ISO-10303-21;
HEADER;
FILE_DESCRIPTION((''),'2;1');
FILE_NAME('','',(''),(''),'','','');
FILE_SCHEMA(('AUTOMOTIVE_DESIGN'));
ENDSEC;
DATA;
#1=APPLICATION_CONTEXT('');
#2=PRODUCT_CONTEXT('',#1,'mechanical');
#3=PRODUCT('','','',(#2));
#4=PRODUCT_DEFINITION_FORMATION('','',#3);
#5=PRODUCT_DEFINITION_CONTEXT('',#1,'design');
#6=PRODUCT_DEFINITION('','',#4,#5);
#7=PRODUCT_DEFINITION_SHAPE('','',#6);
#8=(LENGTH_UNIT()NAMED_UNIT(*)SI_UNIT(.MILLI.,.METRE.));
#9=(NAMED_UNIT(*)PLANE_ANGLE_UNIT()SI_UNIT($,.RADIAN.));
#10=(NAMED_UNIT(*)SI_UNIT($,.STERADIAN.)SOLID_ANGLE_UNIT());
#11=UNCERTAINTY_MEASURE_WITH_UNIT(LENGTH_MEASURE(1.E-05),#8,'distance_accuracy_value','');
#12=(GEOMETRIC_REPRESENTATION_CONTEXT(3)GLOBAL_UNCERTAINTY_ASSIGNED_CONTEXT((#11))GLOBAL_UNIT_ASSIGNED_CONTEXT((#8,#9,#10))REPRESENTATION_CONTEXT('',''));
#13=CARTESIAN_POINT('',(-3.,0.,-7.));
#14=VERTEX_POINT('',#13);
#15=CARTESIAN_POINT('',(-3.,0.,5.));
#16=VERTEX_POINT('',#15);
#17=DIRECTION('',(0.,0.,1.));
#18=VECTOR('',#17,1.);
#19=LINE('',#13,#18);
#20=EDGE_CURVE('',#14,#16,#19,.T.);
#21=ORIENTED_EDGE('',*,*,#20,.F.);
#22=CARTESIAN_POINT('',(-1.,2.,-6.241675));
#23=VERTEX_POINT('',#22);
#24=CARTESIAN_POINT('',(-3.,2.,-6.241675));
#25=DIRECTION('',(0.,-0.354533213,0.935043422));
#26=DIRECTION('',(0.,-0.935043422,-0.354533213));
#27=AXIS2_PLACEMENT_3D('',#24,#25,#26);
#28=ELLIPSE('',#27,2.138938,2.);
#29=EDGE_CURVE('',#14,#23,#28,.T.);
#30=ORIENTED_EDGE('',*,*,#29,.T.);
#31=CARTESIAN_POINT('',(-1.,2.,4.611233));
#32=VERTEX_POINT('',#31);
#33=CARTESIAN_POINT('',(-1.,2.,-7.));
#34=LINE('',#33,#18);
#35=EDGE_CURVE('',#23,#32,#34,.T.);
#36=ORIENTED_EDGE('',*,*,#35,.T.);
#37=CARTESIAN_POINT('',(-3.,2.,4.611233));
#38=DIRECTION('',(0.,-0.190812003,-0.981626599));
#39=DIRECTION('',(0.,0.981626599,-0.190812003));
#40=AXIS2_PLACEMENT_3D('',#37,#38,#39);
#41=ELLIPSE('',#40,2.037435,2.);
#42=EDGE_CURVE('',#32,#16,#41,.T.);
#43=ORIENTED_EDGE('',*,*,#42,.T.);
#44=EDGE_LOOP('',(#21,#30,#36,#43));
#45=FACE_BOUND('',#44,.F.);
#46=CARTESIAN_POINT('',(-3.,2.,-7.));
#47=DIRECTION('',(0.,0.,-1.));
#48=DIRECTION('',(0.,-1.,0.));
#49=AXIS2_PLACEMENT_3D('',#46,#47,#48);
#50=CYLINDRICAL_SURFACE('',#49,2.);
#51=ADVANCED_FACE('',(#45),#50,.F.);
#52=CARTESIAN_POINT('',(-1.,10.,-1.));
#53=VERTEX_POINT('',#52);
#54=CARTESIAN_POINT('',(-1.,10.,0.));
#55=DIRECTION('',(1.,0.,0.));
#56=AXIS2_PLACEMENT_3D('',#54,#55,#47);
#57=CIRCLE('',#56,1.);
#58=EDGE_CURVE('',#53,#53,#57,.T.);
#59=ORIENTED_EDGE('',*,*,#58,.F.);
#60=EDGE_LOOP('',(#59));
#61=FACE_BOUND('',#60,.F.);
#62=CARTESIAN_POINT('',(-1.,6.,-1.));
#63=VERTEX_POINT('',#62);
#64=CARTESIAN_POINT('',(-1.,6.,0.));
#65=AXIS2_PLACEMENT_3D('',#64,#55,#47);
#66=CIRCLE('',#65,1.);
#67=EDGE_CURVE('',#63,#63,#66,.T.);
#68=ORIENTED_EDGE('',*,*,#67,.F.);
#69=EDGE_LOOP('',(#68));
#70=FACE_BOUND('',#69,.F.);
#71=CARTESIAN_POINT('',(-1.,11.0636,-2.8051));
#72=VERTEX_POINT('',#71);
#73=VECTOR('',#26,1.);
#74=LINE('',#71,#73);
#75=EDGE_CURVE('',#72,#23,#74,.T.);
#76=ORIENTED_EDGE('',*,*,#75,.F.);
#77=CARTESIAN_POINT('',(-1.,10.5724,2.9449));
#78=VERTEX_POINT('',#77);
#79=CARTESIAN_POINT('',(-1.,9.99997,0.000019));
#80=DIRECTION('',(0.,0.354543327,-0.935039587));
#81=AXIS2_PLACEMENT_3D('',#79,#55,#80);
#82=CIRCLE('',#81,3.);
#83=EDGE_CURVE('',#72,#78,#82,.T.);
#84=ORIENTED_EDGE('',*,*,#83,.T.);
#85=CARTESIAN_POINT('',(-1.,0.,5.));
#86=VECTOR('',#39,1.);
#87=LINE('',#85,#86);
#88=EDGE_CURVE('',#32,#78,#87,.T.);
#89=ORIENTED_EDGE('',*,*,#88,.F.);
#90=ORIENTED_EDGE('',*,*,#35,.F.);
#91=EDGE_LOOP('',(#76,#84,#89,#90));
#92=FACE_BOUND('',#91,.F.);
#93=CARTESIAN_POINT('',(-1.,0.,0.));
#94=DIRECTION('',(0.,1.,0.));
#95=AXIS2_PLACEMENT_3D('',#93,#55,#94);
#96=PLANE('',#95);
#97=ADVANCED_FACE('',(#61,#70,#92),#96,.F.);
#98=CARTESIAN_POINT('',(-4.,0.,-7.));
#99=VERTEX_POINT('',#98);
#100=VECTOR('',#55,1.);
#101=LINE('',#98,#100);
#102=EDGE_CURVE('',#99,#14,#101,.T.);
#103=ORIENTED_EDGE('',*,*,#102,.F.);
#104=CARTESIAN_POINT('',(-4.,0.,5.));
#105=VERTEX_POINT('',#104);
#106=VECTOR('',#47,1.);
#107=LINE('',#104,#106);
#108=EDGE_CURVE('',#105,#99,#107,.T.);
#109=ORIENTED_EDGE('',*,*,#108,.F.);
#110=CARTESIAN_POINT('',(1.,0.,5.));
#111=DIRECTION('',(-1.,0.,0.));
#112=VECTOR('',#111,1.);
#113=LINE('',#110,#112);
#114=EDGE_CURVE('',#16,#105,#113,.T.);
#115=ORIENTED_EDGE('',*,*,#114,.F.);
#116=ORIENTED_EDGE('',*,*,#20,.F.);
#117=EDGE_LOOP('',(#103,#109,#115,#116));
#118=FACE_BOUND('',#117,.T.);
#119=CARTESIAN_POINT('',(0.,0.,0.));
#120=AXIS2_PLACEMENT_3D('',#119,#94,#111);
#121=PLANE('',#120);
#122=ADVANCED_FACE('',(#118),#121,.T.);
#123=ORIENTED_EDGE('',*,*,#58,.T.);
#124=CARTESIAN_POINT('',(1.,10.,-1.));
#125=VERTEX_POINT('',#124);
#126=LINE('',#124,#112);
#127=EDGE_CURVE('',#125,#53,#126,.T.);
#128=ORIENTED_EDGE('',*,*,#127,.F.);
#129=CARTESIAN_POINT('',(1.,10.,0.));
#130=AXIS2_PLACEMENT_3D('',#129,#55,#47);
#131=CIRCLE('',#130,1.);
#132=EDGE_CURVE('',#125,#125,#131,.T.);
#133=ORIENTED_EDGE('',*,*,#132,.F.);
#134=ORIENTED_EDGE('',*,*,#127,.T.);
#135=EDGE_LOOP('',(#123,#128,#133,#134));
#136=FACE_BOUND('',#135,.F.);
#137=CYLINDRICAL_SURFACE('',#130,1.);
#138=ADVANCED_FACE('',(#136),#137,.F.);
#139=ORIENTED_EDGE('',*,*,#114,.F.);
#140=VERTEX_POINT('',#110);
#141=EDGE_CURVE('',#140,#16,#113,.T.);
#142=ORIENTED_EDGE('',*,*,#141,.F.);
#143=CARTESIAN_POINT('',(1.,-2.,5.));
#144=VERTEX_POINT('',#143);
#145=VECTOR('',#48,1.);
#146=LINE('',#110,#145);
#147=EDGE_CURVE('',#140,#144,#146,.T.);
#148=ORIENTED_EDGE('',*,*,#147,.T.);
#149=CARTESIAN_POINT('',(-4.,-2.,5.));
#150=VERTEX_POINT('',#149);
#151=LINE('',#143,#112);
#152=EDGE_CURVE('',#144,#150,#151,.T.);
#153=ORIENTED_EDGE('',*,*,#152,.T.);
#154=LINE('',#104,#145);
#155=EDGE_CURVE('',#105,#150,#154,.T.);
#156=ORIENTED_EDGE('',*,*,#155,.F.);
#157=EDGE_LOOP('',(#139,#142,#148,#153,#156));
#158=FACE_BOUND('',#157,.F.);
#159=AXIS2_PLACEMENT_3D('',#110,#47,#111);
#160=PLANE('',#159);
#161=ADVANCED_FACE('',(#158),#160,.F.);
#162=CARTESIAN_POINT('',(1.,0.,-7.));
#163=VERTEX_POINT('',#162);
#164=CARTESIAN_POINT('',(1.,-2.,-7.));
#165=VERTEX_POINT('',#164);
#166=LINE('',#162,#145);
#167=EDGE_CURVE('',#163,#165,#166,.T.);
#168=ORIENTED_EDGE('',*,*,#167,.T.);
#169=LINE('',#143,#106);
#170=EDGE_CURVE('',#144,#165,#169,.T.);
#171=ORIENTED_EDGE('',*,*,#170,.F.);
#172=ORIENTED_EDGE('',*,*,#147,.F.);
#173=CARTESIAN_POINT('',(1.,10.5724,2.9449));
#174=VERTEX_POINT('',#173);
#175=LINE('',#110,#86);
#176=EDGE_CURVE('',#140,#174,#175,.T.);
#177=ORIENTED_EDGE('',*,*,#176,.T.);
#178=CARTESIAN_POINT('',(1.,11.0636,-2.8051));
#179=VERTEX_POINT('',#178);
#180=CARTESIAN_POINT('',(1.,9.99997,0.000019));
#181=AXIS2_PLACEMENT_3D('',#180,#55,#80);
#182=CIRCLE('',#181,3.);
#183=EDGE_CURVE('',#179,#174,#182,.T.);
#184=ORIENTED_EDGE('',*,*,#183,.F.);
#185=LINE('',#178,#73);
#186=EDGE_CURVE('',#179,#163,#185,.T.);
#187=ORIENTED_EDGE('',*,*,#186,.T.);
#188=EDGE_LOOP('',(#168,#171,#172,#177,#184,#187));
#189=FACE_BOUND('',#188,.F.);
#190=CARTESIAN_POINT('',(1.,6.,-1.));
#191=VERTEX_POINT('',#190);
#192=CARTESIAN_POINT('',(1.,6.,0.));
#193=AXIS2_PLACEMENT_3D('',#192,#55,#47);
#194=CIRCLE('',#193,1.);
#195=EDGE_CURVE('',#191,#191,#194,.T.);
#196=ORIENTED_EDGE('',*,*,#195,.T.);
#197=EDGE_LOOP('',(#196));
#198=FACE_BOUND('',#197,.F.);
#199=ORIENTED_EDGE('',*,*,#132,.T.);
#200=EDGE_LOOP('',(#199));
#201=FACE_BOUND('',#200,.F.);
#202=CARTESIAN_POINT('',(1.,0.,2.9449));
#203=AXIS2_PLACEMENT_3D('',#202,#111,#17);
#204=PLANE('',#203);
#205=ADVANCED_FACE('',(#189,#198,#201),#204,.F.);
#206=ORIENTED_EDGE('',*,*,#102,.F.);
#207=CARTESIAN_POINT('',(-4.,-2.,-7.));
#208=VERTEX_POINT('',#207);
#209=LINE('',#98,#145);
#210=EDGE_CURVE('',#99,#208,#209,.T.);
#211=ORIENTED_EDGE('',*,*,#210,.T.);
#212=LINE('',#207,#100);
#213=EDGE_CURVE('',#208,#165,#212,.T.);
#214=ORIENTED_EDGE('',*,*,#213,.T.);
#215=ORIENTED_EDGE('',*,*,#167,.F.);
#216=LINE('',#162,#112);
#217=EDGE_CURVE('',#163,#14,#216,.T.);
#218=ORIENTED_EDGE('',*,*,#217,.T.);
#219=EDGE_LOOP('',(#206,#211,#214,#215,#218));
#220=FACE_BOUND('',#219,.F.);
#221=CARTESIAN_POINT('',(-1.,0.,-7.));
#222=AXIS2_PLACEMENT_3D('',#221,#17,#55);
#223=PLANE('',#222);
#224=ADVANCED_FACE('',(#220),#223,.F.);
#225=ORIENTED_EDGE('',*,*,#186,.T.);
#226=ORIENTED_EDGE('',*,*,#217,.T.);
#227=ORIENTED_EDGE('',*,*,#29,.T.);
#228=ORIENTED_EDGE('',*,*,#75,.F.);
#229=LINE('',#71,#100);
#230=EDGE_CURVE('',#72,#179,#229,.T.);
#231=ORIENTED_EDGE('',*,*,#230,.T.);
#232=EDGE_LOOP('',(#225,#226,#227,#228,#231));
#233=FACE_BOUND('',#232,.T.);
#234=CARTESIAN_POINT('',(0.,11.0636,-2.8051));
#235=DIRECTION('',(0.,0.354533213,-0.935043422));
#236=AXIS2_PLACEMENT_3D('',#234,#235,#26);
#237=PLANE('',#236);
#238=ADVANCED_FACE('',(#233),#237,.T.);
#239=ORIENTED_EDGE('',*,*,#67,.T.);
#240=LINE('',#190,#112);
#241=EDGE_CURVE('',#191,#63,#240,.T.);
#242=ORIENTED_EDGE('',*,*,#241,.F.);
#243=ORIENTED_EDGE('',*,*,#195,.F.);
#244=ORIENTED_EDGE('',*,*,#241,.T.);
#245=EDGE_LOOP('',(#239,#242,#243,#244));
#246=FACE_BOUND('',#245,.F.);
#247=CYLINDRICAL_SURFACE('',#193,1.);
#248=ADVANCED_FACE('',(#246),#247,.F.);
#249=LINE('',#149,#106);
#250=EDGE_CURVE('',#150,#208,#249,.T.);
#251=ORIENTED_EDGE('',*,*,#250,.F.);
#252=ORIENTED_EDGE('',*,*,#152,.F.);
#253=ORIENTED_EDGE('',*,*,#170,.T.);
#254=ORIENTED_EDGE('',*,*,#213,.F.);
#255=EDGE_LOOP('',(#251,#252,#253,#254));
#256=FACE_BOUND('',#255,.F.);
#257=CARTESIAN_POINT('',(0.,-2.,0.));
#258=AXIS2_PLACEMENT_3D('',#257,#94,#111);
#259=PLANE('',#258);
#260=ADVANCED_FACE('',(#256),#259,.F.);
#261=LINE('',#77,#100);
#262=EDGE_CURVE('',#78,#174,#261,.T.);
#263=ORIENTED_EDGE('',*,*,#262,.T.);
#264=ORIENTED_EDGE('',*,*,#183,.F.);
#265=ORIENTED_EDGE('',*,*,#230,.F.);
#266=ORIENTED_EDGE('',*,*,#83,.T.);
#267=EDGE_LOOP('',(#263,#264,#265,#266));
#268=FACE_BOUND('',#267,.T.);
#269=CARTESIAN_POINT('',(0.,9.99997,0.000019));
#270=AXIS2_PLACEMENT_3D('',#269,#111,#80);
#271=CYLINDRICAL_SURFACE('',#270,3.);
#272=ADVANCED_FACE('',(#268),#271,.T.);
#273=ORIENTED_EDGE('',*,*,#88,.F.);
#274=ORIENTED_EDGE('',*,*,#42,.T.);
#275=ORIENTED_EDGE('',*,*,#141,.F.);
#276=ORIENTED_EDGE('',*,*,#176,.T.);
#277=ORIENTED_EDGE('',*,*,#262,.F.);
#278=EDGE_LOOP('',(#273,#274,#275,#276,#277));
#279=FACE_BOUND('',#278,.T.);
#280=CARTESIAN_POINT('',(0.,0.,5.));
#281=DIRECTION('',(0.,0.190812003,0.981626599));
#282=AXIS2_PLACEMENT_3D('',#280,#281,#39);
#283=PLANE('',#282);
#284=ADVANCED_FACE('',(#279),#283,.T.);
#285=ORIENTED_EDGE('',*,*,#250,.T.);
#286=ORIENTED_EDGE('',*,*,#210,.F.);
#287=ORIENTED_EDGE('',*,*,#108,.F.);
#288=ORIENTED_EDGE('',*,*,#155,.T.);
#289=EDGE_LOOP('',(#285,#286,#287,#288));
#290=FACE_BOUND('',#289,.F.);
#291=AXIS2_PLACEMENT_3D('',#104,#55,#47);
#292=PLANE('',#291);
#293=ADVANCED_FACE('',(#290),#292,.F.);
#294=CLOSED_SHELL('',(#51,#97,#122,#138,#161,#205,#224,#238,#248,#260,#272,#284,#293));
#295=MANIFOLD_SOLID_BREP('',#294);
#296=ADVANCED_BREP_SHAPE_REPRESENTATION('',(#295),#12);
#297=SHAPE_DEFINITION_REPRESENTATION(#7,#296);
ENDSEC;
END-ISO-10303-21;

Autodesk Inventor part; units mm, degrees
ref_plane "YZ Plane" through (0, 0, 0) normal (1, 0, 0) x (0, 1, 0)
ref_plane "XZ Plane" through (0, 0, 0) normal (0, 1, 0) x (-1, 0, 0)
ref_plane "XY Plane" through (0, 0, 0) normal (0, 0, 1) x (1, 0, 0)
sketch "Skizze1" plane through (0, 0, 0) normal (1, 0, 0) x (0, 1, 0)
  arc A0 (11.0636, -2.8051) -> (10.5724, 2.9449) centre (10, 0) ccw
  line L0 (11.0636, -2.8051) -> (0, -7)
  line L1 (0, -7) -> (0, 5)
  line L2 (0, 5) -> (10.5724, 2.9449)
  point P0 (0, 0)
  dimension "d0" = 3
  dimension "d1" = 10
  dimension "d2" = 12
  dimension "d3" = 5
extrude "Extrusion1" add sketch "Skizze1" along normal mid plane 2
sketch "Skizze2" plane through (0, 0, 0) normal (0, 1, 0) x (-1, 0, 0)
  line L0 (-1, 2.9449) -> (-1, 5) projected
  line L1 (-1, 5) -> (4, 5)
  line L2 (4, 5) -> (4, -7)
  line L3 (4, -7) -> (-1, -7)
  line L4 (-1, -7) -> (-1, 5)
  line L5 (1, -7) -> (-1, -7) projected
  point P0 (0, 0)
  point P1 (-1, 2.9449)
  dimension "d6" = 5
extrude "Extrusion2" add sketch "Skizze2" against normal blind 2
fillet "Rundung1" radius 2 1 edges at (-1, 0, -1)
sketch "Skizze3" plane through (1, 0, 0) normal (1, 0, 0) x (0, 0, -1)
  arc A0 (2.8051, 11.0636) -> (-2.9449, 10.5724) centre (0, 10) ccw projected
  circle A1 centre (0, 10) radius 1
  line L0 (0, 10) -> (0, -2) construction
  line L1 (7, -2) -> (-5, -2) projected
  circle A2 centre (0, 6) radius 1
  point P0 (0, 0)
  dimension "d10" = 2
  dimension "d13" = 4
extrude "Extrusion3" cut sketch "Skizze3" against normal blind 4.75
properties part number "P_Wing_aileron_lever"
